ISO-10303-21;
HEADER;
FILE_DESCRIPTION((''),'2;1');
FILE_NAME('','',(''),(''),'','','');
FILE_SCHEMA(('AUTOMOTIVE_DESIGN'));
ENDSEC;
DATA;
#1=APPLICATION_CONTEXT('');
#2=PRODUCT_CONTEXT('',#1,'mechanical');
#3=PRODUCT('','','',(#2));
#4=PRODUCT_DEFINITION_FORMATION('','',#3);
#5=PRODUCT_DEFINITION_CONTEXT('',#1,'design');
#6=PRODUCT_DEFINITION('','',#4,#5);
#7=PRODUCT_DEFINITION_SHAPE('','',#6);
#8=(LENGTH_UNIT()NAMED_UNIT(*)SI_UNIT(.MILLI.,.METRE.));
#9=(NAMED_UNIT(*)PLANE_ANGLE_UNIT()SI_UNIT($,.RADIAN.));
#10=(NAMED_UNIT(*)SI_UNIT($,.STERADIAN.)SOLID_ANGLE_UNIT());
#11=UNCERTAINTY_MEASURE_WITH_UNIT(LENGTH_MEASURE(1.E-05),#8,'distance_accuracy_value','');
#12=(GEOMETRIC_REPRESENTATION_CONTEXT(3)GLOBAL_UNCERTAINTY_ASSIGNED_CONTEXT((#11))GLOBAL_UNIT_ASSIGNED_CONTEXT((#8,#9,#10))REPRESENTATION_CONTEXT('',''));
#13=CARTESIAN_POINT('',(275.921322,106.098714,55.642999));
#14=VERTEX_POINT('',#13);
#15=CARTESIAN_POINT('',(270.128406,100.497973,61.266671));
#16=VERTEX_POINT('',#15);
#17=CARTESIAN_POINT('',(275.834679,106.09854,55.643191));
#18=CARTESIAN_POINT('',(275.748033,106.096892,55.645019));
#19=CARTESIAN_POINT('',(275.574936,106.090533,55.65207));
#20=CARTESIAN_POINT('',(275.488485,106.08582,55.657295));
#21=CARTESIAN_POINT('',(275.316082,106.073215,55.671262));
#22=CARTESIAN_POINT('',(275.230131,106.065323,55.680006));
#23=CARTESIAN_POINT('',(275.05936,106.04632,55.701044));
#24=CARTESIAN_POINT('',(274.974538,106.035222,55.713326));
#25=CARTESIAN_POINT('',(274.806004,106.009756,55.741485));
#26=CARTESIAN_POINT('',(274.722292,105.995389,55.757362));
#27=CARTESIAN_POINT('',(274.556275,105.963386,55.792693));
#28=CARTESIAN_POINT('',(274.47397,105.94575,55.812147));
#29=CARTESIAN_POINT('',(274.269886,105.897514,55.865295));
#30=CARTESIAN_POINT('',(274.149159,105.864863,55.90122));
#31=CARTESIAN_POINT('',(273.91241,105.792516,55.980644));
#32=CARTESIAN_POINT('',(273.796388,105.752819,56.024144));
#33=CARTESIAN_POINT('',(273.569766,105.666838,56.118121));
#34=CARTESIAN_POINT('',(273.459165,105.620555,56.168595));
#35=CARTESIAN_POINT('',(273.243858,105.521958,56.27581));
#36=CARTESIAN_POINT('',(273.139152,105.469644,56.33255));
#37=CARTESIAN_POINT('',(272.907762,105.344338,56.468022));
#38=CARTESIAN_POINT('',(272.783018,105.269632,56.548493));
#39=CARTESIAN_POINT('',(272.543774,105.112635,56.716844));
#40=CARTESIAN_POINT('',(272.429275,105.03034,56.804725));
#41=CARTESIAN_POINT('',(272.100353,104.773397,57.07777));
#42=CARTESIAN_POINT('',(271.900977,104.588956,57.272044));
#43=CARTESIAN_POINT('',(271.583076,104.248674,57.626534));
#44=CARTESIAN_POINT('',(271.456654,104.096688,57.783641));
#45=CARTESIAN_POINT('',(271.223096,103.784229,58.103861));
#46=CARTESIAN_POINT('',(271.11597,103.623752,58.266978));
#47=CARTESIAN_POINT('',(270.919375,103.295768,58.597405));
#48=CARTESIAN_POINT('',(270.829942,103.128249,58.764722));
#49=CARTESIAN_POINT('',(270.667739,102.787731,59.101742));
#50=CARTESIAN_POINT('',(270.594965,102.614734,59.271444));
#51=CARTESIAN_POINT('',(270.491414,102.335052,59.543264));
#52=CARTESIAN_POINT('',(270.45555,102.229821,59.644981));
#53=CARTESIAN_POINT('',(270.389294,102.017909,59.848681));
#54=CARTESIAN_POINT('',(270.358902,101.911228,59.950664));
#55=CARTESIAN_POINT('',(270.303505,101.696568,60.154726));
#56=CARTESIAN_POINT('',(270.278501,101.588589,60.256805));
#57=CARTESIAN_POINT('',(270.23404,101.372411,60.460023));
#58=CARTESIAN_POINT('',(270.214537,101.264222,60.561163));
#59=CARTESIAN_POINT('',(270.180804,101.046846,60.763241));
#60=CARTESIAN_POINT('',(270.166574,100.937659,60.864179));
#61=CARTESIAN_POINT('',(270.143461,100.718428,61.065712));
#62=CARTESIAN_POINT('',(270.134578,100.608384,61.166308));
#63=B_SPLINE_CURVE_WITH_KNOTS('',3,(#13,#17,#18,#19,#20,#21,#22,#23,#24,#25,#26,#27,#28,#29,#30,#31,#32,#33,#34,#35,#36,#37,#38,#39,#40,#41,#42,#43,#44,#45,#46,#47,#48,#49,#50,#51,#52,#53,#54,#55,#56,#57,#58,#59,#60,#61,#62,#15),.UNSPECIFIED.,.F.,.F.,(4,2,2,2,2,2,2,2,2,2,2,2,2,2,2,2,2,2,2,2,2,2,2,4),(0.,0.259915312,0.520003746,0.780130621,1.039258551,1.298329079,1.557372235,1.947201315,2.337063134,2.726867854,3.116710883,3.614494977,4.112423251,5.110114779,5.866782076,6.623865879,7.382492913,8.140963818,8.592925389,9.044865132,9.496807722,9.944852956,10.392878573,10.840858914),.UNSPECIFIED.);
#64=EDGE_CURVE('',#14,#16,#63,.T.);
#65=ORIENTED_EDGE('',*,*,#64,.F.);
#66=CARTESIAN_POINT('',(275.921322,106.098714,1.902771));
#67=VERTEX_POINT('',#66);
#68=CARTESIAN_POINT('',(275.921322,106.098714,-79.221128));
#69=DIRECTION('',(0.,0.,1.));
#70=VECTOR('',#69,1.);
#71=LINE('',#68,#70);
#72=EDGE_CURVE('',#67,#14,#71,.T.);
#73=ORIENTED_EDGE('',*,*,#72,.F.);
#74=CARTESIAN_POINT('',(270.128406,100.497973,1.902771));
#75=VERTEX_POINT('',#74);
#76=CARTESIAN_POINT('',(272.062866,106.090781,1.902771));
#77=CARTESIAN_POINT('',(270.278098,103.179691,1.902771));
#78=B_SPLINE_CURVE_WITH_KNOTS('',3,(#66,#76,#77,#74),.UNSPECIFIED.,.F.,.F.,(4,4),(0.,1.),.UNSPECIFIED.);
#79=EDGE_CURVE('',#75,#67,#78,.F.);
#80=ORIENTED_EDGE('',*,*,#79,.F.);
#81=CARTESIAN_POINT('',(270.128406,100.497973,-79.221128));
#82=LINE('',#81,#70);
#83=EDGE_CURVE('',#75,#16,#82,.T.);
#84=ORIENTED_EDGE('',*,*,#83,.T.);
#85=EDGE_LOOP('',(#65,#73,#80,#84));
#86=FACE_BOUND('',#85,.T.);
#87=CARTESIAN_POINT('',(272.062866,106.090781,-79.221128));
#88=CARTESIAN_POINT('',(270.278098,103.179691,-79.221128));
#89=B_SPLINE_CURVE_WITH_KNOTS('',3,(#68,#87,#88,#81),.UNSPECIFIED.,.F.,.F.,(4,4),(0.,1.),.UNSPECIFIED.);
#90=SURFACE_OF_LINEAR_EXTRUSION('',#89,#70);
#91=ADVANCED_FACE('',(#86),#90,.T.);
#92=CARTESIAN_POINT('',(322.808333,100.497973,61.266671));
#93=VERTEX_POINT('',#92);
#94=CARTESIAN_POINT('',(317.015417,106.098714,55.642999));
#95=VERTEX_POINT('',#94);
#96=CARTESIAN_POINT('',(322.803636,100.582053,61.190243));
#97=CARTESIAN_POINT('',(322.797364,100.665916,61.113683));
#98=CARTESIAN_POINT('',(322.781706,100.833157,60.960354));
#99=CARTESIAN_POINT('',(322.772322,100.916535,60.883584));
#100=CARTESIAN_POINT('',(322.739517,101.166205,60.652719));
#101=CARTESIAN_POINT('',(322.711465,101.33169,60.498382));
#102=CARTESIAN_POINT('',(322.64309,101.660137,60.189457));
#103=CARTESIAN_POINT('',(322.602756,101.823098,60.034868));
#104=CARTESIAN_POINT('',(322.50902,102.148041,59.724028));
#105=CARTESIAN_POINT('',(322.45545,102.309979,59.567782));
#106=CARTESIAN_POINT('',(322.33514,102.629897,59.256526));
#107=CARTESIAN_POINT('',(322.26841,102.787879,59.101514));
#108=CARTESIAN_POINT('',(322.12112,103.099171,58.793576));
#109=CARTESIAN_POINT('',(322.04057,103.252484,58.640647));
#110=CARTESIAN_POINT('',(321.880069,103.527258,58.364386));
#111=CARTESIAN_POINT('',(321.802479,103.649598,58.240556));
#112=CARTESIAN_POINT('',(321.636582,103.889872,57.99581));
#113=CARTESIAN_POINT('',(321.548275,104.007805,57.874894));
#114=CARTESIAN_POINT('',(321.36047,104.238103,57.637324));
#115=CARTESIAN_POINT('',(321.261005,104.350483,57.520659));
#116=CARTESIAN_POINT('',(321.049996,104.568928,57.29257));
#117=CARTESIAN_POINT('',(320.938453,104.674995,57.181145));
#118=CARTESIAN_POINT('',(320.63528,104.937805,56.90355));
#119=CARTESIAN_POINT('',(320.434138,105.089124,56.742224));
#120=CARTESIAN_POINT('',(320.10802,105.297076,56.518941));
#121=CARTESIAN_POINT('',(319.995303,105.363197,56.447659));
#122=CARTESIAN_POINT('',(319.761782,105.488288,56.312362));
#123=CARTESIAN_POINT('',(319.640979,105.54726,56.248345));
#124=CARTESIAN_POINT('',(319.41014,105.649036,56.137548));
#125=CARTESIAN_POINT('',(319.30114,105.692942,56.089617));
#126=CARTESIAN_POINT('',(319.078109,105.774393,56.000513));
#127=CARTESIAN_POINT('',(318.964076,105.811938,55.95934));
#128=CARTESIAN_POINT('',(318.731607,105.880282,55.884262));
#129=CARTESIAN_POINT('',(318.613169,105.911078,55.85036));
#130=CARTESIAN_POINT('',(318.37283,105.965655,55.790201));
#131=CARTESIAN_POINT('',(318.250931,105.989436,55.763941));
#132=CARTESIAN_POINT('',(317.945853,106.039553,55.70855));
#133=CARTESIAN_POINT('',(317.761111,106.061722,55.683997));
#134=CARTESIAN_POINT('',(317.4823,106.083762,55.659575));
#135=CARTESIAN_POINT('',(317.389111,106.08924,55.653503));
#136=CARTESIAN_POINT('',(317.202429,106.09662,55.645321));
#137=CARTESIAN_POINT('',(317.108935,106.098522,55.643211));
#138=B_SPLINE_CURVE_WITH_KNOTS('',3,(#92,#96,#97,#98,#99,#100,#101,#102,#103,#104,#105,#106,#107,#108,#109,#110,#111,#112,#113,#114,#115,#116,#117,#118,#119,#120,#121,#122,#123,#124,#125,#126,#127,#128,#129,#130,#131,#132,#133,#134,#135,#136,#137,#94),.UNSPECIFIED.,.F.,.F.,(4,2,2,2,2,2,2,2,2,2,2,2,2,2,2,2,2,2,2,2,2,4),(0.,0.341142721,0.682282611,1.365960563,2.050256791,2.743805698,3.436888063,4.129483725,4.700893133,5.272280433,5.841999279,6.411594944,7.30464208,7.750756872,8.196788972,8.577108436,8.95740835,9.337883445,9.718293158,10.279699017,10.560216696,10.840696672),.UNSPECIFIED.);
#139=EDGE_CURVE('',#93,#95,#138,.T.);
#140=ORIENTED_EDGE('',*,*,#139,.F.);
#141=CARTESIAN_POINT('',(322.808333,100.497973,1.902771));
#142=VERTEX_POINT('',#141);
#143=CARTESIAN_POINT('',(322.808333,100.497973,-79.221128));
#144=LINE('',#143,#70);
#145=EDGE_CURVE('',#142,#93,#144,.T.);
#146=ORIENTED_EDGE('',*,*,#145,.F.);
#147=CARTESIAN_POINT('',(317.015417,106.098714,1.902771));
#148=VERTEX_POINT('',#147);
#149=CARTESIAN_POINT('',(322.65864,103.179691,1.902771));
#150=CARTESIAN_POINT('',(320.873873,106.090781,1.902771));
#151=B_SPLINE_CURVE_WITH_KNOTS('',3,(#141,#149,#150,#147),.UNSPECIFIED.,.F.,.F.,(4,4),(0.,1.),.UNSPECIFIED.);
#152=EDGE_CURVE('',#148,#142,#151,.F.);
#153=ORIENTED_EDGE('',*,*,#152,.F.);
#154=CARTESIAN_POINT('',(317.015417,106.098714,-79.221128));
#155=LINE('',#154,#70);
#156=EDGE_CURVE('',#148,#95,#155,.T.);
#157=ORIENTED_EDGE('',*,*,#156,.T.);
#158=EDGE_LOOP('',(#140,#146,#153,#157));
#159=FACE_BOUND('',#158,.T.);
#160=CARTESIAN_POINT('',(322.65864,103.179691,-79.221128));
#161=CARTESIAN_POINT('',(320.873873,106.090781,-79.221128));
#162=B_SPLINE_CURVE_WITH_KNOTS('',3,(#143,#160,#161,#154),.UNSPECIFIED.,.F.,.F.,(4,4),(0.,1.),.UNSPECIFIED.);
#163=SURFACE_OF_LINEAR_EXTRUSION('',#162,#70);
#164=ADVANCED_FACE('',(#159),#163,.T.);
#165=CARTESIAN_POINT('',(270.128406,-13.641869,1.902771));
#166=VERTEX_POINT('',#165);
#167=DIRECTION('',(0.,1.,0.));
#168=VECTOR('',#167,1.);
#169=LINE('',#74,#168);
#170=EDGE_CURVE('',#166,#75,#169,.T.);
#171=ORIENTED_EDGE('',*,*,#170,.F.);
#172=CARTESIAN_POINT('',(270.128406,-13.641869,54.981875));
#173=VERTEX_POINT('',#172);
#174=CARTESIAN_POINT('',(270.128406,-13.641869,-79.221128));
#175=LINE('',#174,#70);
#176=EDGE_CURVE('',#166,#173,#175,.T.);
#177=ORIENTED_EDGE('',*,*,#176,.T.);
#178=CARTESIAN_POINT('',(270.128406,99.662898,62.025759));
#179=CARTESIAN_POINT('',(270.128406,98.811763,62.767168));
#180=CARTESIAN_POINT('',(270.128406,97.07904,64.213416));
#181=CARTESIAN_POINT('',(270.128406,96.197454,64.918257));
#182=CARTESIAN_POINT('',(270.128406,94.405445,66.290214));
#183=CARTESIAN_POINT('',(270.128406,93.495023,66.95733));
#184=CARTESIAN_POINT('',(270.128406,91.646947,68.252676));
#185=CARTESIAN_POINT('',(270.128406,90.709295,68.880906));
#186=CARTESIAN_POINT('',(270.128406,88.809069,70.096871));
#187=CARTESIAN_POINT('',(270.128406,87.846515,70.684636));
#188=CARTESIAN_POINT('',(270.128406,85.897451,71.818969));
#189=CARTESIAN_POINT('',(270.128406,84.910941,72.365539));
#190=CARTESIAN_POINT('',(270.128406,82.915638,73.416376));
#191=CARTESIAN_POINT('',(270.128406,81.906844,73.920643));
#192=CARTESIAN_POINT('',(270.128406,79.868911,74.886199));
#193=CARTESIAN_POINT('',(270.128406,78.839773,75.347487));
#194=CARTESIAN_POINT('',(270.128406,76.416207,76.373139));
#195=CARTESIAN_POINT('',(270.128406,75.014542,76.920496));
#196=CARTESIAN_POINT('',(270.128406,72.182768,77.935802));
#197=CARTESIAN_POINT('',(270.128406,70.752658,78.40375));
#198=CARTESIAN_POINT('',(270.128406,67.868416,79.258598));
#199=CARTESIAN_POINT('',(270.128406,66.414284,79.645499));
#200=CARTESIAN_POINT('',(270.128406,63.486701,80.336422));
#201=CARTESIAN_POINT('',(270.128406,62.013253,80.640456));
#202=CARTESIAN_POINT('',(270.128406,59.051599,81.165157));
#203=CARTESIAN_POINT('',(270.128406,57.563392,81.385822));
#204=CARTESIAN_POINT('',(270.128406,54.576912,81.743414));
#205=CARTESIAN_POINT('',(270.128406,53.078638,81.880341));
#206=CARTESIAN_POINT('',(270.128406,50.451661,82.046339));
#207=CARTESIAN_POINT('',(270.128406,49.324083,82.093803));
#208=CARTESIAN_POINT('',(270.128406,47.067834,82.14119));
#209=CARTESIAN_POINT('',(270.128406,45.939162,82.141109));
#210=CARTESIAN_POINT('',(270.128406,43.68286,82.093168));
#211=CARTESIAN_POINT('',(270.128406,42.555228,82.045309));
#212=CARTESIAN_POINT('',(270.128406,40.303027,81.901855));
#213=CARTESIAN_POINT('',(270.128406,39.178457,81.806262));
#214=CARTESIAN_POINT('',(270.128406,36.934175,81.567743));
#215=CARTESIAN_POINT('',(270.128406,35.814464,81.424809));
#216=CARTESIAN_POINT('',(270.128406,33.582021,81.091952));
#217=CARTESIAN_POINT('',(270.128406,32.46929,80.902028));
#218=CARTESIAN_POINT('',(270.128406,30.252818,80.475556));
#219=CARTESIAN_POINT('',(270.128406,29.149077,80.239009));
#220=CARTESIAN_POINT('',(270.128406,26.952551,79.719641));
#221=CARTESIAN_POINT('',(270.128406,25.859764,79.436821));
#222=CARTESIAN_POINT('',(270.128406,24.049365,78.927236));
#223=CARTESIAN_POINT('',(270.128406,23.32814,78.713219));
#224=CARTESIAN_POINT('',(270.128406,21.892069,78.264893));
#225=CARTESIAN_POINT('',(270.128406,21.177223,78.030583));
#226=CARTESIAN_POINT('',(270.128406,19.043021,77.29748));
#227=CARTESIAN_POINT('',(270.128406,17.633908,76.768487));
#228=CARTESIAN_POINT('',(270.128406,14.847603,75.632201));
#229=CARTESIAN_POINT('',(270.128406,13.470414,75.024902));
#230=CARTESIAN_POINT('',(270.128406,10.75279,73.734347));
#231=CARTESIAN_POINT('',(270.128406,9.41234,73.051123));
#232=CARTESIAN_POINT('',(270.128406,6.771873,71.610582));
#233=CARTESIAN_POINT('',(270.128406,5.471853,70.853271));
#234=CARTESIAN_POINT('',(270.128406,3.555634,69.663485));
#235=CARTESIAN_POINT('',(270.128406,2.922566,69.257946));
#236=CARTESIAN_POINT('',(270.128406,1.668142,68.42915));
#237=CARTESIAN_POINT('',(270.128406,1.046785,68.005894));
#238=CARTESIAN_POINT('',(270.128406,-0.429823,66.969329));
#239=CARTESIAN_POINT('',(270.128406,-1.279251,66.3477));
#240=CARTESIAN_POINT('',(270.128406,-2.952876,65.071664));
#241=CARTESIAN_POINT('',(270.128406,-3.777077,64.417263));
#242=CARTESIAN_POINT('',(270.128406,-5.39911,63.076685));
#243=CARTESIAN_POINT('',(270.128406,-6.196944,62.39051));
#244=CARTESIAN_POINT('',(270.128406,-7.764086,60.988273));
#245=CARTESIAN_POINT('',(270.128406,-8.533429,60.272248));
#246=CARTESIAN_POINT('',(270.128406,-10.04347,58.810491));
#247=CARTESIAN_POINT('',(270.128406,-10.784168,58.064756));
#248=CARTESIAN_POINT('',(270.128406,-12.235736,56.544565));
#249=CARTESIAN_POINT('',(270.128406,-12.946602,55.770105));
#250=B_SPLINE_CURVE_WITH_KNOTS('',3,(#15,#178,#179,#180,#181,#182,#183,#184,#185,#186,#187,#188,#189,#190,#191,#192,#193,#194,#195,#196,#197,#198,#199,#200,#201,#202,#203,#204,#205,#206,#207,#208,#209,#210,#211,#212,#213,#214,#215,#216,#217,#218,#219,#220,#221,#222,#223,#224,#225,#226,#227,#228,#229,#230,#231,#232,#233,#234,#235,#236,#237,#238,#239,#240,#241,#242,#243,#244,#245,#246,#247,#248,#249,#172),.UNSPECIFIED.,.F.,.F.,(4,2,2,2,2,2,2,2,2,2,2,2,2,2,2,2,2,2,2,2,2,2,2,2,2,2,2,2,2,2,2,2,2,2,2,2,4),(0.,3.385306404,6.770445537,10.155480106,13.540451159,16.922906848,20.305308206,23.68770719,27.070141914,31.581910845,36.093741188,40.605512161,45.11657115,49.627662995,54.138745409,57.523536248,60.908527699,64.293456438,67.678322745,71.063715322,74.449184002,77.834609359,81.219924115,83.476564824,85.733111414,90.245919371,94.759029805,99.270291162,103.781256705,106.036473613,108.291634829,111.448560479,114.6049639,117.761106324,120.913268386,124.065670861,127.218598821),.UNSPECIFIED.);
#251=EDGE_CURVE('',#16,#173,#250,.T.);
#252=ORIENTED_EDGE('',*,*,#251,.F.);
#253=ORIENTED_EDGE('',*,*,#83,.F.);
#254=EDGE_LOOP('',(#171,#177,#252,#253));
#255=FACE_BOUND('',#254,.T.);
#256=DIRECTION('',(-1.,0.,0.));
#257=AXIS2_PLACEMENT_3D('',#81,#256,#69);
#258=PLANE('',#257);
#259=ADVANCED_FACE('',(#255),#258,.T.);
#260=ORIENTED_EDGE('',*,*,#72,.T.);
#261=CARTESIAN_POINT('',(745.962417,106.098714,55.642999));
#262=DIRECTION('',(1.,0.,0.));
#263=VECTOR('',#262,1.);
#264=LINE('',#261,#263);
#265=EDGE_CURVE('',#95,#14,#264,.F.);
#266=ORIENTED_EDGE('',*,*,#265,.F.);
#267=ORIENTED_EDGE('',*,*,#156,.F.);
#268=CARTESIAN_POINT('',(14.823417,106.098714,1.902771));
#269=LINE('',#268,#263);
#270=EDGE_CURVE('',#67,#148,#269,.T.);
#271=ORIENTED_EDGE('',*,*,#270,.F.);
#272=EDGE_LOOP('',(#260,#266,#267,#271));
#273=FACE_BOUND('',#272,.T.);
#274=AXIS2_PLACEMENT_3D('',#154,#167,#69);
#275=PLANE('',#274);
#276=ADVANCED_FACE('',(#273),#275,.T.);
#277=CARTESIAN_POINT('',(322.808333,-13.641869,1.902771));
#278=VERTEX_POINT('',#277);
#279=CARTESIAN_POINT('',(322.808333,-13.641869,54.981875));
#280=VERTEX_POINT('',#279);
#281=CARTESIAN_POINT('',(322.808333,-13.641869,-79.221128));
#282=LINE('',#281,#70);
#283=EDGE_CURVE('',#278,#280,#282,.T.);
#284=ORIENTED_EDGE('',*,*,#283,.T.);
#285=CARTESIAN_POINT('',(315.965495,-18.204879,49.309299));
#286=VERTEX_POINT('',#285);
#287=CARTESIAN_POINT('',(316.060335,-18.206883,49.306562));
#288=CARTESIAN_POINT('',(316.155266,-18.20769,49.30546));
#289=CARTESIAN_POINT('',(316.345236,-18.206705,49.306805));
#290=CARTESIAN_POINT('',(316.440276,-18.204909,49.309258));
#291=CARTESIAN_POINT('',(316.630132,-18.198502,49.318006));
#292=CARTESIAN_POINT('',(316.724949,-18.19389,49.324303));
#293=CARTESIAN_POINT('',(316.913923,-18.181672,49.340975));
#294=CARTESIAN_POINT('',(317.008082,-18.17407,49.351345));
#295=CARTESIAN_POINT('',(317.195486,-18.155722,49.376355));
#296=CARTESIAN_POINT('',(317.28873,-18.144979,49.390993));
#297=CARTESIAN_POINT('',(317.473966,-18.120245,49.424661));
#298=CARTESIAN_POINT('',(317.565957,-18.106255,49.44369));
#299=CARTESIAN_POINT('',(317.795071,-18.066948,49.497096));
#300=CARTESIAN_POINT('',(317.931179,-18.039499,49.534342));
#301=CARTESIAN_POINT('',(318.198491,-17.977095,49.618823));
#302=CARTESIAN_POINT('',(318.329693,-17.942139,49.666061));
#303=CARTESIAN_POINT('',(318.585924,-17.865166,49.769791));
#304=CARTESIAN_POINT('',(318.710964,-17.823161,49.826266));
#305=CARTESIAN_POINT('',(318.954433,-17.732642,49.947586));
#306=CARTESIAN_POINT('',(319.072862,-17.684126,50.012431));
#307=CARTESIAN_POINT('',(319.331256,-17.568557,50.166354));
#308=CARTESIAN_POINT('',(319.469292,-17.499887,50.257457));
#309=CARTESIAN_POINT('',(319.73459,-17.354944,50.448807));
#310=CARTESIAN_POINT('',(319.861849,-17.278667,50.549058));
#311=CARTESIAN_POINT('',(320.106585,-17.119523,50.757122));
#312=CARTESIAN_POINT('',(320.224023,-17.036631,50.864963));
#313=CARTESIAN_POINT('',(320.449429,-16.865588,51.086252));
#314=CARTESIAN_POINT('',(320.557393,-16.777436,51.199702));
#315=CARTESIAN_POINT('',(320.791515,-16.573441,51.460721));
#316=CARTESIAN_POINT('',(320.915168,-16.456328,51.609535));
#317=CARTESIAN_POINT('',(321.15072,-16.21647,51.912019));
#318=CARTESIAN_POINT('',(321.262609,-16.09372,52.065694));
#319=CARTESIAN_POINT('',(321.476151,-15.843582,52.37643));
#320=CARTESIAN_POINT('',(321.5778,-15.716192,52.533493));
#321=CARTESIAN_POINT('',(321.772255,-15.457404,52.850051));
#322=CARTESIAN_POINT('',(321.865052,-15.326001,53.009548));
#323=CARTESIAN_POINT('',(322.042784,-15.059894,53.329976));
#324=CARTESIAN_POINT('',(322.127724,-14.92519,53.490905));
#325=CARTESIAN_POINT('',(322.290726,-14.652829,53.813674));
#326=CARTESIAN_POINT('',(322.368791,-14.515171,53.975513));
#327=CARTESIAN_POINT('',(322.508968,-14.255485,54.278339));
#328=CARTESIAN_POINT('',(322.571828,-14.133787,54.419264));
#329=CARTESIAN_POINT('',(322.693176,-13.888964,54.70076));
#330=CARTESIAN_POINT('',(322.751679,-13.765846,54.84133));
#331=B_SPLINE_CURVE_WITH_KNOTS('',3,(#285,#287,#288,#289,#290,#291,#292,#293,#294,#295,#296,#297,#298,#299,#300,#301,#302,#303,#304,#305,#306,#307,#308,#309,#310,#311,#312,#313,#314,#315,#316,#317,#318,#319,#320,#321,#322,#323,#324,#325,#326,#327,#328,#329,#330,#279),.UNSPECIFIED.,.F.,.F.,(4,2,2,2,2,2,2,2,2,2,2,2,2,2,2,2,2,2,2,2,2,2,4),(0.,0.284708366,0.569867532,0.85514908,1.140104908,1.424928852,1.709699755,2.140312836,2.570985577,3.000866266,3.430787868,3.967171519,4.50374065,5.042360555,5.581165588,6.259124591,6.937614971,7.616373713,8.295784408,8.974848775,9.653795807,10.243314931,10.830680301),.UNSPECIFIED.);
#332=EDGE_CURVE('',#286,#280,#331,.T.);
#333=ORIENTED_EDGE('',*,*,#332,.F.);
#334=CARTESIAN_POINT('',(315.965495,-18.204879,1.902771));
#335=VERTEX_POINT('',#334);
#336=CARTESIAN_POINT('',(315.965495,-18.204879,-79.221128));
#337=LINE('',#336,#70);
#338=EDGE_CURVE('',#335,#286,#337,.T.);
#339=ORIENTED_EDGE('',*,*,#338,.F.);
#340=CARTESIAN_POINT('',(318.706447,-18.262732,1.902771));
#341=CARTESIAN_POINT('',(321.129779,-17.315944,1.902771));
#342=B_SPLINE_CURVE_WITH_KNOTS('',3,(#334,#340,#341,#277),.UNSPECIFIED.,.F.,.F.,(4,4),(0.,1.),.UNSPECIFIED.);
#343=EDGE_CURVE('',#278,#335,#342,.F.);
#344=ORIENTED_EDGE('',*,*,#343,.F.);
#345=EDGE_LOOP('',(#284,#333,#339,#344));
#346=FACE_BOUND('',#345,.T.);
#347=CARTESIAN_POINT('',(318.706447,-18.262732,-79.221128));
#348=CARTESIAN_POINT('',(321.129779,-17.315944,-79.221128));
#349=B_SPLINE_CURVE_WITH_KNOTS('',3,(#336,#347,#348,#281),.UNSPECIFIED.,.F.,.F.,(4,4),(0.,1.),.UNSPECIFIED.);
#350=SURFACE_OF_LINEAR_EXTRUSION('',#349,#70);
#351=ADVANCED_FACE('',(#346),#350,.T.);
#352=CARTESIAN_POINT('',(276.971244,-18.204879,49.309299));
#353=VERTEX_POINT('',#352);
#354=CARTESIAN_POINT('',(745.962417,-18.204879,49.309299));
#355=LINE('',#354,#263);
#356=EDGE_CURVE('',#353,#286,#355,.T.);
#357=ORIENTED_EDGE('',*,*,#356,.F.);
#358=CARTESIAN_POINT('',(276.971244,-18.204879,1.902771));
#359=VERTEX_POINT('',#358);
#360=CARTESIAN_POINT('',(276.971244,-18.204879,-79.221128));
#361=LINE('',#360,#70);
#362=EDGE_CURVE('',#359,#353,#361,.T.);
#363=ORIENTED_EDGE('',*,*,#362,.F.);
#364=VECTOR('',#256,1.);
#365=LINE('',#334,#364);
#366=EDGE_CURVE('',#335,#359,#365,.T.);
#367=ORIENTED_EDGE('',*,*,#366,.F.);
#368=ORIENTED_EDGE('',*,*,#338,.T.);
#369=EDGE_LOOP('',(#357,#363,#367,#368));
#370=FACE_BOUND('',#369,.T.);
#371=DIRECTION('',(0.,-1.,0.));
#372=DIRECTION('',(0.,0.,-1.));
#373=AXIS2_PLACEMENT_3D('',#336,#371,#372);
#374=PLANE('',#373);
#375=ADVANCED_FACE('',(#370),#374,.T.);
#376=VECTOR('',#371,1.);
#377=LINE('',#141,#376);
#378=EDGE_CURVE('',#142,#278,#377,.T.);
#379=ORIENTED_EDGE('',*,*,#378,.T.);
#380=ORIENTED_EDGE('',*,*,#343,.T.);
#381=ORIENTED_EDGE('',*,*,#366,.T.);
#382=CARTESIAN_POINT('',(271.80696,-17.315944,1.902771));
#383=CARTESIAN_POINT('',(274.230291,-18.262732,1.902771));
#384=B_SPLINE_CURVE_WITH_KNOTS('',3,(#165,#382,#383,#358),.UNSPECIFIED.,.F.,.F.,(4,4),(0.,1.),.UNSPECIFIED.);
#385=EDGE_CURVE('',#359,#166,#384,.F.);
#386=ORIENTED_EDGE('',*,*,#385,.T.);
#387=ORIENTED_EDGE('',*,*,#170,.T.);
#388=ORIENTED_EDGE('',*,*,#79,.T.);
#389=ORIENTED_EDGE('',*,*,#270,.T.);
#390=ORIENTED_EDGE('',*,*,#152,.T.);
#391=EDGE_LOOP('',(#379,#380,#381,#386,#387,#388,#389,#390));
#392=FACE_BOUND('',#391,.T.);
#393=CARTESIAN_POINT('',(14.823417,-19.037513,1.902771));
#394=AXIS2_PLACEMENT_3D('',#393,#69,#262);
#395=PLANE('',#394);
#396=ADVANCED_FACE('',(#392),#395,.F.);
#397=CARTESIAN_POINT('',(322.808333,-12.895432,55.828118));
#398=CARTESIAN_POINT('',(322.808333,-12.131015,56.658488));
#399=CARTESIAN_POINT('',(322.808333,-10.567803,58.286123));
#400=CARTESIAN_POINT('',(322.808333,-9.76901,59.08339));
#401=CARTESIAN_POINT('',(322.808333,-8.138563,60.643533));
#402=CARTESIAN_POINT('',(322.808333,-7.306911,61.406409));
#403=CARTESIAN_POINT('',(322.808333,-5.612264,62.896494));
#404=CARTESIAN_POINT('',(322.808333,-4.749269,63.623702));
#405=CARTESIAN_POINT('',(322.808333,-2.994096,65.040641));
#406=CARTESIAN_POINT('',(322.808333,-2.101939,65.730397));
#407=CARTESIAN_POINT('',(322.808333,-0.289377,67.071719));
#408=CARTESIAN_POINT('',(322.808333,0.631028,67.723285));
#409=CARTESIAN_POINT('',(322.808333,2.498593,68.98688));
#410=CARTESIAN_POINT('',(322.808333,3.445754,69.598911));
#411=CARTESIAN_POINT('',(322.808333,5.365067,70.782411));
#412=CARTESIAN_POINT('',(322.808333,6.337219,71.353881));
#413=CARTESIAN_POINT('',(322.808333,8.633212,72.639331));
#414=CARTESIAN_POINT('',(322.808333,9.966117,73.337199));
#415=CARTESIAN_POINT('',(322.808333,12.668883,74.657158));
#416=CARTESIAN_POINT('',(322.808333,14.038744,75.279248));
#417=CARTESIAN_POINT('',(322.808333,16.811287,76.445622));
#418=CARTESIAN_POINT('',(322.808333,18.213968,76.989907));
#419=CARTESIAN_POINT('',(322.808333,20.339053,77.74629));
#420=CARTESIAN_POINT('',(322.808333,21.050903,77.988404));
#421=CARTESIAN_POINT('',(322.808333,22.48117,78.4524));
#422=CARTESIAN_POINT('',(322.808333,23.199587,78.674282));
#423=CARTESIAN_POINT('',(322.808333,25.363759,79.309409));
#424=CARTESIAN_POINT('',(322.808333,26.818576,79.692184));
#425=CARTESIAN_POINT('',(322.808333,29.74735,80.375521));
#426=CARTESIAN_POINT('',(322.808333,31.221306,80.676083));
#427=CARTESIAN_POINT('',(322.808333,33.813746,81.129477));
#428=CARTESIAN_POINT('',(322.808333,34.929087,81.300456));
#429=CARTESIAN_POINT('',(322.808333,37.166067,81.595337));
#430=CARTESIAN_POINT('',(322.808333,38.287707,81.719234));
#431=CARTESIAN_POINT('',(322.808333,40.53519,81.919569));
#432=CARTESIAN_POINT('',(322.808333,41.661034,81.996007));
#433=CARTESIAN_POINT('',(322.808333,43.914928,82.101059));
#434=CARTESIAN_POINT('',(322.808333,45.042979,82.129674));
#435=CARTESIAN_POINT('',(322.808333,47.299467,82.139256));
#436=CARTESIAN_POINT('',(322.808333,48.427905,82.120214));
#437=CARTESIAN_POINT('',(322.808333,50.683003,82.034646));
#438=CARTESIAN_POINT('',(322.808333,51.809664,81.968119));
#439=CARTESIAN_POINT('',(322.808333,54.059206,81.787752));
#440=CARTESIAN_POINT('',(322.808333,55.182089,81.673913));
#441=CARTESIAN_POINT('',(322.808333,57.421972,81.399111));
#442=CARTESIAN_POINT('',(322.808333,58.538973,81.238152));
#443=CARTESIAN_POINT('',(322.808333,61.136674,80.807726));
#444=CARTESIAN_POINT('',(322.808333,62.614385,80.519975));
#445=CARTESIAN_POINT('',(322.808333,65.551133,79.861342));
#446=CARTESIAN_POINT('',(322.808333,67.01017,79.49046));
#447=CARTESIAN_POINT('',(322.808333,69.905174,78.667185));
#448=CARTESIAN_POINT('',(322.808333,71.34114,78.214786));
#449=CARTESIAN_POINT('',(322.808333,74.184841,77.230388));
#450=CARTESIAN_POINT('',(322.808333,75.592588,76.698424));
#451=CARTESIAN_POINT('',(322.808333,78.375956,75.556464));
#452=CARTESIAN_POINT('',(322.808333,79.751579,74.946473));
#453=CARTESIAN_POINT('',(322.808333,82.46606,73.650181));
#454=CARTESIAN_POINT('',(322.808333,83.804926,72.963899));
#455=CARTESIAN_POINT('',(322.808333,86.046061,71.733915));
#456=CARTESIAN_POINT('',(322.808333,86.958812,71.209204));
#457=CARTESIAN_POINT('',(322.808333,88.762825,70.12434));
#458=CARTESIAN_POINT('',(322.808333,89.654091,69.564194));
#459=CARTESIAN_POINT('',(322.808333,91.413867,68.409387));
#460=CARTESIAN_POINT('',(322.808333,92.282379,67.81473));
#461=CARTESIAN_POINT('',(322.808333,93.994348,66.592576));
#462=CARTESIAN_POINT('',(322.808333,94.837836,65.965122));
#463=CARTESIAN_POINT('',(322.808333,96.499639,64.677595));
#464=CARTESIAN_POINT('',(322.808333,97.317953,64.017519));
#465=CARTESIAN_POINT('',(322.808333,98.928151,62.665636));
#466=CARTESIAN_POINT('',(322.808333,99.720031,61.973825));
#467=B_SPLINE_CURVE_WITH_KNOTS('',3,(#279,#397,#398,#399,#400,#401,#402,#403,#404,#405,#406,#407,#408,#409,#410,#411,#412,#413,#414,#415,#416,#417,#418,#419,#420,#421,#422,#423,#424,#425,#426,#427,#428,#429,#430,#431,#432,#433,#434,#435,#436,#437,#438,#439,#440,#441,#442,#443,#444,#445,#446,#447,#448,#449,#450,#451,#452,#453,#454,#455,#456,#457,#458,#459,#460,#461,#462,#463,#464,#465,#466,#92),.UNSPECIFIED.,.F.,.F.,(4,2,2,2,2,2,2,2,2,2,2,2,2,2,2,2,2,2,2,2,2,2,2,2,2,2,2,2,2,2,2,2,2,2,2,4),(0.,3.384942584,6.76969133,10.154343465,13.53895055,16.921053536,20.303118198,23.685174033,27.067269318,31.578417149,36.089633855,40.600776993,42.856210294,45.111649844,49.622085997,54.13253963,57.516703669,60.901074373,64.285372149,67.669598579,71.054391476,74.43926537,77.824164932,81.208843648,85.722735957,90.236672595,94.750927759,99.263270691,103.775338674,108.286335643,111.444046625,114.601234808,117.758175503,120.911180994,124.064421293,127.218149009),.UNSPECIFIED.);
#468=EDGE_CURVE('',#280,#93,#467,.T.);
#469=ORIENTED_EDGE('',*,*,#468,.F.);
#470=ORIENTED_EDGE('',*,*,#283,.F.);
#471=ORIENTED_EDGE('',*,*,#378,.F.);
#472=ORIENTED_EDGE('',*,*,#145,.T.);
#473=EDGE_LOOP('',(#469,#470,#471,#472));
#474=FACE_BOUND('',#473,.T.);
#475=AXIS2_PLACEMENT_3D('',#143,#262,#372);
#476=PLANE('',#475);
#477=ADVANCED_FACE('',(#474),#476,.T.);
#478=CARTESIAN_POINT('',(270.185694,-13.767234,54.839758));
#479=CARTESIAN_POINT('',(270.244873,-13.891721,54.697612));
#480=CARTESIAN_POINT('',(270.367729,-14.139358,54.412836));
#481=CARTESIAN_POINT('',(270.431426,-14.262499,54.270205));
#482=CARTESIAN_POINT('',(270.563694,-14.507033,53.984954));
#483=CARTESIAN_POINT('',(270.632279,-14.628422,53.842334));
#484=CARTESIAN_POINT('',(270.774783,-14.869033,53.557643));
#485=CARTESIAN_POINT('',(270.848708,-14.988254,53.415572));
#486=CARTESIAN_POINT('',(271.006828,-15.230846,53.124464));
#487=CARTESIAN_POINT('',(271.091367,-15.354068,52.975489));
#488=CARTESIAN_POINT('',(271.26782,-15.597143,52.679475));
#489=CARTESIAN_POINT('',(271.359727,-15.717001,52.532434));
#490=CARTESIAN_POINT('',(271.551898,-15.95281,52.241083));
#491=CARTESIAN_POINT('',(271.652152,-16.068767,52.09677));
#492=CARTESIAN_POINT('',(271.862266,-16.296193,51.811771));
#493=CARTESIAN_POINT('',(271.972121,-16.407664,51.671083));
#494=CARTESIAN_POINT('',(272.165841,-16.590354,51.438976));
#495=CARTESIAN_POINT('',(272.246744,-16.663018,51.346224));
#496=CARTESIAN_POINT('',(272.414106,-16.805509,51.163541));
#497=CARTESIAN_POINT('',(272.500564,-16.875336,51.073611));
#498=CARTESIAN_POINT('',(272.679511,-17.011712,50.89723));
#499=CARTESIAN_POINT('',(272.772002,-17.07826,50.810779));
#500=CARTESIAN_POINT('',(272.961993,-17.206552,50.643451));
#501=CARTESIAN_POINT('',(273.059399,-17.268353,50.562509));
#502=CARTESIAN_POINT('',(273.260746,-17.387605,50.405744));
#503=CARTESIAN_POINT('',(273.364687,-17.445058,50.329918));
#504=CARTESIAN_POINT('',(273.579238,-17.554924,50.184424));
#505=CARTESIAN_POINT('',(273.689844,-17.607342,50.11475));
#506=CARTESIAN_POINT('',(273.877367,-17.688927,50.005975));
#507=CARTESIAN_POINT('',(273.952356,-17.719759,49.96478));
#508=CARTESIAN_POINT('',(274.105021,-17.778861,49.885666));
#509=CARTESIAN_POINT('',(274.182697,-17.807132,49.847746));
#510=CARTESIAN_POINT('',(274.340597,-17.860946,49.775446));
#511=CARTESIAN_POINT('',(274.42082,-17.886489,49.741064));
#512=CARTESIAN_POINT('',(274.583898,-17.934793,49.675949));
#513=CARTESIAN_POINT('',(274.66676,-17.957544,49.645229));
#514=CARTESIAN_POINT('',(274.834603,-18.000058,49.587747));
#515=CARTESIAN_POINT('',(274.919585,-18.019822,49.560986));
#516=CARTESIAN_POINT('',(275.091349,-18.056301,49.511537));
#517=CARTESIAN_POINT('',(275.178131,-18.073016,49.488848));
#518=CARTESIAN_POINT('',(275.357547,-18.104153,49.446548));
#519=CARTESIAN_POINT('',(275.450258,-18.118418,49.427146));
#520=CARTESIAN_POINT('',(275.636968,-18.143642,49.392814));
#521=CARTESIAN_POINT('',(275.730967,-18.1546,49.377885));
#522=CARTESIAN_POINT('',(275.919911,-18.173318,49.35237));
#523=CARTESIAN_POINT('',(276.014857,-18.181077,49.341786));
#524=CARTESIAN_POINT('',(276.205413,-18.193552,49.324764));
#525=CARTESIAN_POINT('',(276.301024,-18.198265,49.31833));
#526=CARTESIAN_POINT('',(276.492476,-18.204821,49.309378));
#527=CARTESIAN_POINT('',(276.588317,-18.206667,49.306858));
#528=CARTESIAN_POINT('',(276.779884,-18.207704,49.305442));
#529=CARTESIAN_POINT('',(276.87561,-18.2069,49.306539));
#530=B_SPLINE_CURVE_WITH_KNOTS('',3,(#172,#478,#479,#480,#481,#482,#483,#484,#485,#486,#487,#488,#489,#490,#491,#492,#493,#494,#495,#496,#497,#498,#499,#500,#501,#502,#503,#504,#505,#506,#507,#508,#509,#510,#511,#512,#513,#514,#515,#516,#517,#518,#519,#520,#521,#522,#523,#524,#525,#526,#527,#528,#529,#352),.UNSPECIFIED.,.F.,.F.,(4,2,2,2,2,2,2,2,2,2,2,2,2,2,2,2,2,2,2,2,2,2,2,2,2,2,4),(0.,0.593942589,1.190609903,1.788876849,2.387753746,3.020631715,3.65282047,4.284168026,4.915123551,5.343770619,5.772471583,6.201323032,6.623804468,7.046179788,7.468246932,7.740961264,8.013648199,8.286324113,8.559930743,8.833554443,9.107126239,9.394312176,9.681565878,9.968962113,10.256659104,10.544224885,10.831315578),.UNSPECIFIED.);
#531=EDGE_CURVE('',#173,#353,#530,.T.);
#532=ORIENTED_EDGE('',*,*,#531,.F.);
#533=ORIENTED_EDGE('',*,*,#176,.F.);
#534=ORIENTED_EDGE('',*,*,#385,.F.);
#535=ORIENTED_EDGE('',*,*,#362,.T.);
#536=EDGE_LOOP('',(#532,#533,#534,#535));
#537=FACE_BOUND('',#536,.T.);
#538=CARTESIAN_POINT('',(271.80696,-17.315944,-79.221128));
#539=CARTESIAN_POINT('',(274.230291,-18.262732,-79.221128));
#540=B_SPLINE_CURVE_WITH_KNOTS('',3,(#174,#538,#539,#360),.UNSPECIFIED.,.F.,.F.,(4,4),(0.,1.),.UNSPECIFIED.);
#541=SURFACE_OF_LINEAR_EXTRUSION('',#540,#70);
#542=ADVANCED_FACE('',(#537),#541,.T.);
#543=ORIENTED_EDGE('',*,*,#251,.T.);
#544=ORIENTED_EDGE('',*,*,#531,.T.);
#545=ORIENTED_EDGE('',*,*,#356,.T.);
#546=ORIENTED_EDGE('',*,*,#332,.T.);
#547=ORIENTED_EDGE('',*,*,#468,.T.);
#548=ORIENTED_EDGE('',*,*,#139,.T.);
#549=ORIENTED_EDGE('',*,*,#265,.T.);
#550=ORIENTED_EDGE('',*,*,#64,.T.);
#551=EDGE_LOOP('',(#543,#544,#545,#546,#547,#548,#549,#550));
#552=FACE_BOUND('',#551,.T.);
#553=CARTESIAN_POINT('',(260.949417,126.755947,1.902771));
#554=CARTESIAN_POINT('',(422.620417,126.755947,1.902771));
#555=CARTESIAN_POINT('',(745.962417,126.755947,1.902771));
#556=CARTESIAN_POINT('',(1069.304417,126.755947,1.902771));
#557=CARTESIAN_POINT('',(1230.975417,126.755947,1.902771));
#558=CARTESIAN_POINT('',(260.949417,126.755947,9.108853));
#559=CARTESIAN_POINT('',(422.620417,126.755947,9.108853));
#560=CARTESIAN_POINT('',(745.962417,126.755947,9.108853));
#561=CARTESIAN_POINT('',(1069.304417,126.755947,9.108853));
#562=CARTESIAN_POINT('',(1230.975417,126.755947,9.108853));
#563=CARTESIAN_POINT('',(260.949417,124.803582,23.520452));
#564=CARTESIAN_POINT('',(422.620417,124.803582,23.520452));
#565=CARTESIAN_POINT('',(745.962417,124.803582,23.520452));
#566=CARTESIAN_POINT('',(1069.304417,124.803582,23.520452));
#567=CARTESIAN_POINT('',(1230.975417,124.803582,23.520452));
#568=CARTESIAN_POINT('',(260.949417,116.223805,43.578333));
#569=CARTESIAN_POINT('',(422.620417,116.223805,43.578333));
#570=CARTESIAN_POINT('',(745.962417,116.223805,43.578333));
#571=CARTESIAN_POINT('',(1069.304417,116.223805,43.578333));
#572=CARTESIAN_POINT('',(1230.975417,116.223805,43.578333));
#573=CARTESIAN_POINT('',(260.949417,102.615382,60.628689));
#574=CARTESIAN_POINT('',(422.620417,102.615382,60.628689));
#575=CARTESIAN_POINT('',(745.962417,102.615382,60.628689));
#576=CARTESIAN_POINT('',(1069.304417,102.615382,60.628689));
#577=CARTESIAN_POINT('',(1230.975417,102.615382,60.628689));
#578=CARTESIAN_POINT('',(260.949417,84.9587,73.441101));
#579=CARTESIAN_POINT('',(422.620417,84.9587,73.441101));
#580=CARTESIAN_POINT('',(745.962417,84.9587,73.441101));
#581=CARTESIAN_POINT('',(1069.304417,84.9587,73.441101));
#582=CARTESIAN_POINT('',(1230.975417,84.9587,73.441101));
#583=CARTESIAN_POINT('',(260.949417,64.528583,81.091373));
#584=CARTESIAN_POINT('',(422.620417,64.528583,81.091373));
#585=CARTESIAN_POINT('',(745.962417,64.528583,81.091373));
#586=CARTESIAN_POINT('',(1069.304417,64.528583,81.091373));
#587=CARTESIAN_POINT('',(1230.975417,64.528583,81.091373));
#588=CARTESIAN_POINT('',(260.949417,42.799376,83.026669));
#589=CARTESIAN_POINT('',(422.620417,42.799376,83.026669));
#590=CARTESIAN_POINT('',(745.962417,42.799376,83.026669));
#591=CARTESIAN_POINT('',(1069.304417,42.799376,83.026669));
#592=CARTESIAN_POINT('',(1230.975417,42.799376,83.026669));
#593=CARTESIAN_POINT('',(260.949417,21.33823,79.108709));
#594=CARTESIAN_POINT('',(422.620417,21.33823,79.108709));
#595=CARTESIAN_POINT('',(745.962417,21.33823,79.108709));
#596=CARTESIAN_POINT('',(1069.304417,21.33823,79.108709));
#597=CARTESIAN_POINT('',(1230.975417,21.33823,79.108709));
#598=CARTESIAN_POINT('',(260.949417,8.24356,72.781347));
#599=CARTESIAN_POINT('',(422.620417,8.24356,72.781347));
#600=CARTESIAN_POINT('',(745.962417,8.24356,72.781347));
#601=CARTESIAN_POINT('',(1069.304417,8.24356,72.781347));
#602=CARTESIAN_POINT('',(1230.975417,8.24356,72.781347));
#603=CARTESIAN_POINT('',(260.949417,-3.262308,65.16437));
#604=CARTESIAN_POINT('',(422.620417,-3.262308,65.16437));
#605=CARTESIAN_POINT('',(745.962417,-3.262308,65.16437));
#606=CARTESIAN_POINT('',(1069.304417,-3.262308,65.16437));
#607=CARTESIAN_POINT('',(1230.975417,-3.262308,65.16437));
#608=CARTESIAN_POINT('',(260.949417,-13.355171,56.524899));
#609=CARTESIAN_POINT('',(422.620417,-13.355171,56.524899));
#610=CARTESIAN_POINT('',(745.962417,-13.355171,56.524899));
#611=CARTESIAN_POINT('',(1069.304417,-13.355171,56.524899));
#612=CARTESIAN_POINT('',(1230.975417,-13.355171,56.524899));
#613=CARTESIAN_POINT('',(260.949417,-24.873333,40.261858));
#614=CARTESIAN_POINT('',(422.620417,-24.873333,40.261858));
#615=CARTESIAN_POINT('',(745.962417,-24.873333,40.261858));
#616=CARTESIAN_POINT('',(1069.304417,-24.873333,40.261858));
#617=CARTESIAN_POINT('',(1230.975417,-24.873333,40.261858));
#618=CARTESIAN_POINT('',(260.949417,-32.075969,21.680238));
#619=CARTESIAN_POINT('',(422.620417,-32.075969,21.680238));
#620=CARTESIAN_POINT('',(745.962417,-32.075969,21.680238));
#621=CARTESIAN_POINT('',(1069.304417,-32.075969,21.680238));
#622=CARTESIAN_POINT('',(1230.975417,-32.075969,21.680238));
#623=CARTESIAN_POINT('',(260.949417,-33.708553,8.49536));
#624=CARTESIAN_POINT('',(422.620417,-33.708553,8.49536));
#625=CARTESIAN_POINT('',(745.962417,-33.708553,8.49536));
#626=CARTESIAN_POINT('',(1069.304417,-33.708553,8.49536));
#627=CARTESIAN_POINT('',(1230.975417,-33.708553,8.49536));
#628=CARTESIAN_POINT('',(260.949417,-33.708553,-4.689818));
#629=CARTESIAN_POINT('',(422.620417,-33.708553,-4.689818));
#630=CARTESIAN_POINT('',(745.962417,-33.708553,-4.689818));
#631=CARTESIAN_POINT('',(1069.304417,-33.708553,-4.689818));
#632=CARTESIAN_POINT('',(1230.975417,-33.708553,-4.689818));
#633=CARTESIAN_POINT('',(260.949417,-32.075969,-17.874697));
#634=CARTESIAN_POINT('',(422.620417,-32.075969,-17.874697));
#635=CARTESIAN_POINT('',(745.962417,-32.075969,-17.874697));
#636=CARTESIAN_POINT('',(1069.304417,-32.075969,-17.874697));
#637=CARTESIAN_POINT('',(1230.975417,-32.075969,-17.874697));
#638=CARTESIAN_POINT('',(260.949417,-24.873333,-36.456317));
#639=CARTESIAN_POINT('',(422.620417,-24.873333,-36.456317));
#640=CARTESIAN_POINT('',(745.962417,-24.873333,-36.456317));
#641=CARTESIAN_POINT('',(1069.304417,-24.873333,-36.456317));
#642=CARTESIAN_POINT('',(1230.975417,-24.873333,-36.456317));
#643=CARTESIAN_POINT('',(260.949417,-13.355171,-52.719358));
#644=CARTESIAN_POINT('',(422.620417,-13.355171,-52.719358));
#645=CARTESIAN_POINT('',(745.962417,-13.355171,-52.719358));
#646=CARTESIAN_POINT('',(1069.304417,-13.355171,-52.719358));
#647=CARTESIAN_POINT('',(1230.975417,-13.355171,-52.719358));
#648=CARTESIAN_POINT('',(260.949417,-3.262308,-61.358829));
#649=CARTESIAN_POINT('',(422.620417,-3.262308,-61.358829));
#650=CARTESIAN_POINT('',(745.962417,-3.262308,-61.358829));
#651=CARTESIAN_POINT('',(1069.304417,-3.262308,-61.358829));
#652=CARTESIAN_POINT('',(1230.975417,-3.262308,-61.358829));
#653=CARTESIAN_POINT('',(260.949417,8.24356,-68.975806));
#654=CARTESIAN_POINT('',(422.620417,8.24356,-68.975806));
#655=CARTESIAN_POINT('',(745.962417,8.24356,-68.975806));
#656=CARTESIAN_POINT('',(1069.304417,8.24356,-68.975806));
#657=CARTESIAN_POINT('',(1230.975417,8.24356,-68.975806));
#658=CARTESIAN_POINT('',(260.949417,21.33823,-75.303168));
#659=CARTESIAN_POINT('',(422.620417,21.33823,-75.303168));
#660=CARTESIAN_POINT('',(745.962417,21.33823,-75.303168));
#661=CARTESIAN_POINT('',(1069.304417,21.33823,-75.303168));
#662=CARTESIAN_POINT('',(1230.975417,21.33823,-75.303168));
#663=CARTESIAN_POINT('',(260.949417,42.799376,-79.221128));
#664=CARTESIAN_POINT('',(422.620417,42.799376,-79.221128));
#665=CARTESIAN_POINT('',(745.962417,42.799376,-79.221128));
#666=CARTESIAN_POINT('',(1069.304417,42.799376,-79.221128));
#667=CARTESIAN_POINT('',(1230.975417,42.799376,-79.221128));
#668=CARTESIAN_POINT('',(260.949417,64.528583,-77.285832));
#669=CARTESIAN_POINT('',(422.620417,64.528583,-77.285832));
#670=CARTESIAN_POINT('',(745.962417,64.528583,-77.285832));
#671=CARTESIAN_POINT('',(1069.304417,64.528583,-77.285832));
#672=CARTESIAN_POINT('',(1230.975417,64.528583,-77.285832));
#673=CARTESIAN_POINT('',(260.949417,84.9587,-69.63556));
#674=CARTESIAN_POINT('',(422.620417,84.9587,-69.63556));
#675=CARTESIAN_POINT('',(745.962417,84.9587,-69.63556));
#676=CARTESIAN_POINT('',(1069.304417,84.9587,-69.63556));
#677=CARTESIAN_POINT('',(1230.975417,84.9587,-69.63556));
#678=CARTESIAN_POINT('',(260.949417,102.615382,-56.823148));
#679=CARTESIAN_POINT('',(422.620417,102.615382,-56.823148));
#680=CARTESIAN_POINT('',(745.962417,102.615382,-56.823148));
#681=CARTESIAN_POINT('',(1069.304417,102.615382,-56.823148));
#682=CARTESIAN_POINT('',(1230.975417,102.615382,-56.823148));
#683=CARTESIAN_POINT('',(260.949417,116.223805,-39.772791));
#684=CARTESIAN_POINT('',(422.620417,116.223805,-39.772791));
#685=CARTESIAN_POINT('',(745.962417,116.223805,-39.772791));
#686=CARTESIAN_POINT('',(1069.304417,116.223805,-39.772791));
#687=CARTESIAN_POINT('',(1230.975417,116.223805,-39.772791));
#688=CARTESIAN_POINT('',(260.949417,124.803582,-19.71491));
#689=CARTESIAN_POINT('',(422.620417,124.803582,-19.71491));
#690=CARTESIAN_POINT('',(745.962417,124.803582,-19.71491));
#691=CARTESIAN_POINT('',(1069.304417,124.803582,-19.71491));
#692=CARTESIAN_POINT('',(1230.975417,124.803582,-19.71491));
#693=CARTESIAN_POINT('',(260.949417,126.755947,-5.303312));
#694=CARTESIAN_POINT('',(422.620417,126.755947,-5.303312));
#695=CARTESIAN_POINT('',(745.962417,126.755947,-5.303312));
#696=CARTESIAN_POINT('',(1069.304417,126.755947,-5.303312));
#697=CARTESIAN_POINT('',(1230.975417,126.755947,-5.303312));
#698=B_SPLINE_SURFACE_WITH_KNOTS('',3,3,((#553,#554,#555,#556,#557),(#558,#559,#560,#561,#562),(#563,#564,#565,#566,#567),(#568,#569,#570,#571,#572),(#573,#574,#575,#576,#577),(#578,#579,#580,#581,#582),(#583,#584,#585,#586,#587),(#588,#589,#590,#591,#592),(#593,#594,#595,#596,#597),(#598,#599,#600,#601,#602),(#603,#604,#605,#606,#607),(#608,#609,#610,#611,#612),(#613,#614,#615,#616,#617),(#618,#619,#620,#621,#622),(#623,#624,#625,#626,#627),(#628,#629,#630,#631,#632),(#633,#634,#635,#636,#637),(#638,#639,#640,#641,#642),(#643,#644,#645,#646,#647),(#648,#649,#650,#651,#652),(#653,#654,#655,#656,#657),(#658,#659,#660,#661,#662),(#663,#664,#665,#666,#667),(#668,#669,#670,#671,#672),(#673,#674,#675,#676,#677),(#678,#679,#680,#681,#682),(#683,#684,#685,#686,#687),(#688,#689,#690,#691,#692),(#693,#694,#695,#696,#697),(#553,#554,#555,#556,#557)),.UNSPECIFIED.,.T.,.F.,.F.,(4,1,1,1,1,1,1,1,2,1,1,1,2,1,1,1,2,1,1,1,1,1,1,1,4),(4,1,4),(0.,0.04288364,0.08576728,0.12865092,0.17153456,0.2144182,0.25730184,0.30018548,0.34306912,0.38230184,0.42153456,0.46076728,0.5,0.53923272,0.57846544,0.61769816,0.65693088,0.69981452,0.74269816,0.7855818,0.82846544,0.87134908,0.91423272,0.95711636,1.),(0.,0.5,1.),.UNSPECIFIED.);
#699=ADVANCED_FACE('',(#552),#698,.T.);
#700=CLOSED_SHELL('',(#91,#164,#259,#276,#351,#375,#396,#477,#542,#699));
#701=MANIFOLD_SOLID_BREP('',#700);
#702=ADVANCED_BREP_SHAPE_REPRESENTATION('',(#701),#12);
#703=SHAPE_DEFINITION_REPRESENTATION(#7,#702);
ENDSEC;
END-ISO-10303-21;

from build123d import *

# Parameters (mm, degrees)
LOFT1_START             = 259.08
LOFT1_DEPTH             = 1021.08
CUT_EXTRUDE1_DEPTH      = 1290.62122974
LPATTERN1_COUNT         = 15
LPATTERN1_PITCH         = 53.34
CUT_EXTRUDE4_DEPTH      = 1290.62122974
CUT_EXTRUDE4_DEPTH_BACK = 1290.62122974
SKETCH12_OUTSIDE_W      = 1232.81
SKETCH12_OUTSIDE_H      = 380.64
SKETCH13_W              = 691.165372795
SKETCH13_H              = 233.895042588
CUT_EXTRUDE5_DEPTH      = 360.661187802
SCALE1_SCALE            = 0.95


# Read off the part's stored shape, not the designer's step: Loft1
with BuildPart() as part:
    # Loft1 outline → Loft1 (new body)
    with BuildSketch(Plane.YZ.offset(LOFT1_START)):
        with BuildLine():
            add(Edge.make_bspline(
                [(131.074840176, 0), (131.074840176, 7.585349878), (129.019719734, 22.755453715), (119.988374686, 43.869012627), (105.663719284, 61.816756347), (87.077737999, 75.303505752), (65.572351994, 83.356423395), (42.699502143, 85.39357748), (20.108822767, 81.269408641), (6.324958878, 74.609028267), (-5.786480365, 66.591156976), (-16.410547257, 57.496977056), (-28.534928085, 40.377986455), (-36.116650435, 20.818386871), (-37.835159824, 6.939567352), (-37.835159824, -6.939567352), (-36.116650435, -20.818386871), (-28.534928085, -40.377986455), (-16.410547257, -57.496977056), (-5.786480365, -66.591156976), (6.324958878, -74.609028267), (20.108822767, -81.269408641), (42.699502143, -85.39357748), (65.572351994, -83.356423395), (87.077737999, -75.303505752), (105.663719284, -61.816756347), (119.988374686, -43.869012627), (129.019719734, -22.755453715), (131.074840176, -7.585349878), (131.074840176, 0)],
                knots=[0, 0, 0, 0, 0.04288364, 0.08576728, 0.12865092, 0.17153456, 0.2144182, 0.25730184, 0.30018548, 0.34306912, 0.34306912, 0.38230184, 0.42153456, 0.46076728, 0.5, 0.5, 0.53923272, 0.57846544, 0.61769816, 0.65693088, 0.65693088, 0.69981452, 0.74269816, 0.7855818, 0.82846544, 0.87134908, 0.91423272, 0.95711636, 1, 1, 1, 1], degree=3))
        make_face()
    extrude(amount=LOFT1_DEPTH)

    # Sketch10 (on Front Plane) → Cut-Extrude1 (cut, symmetric)
    with BuildSketch(Plane.XY):
        with BuildLine():
            Line((370.088452905, 78.026436792), (370.088452905, 52.620114122))
            add(Edge.make_bspline(
                [(370.088452905, 52.620114122), (370.995867627, 49.272576747), (375.115065094, 47.839862903)],
                knots=[0, 0, 0, 1, 1, 1], degree=2))
            Line((375.115065094, 47.839862903), (390.064888423, 47.839862903))
            add(Edge.make_bspline(
                [(395.091500612, 52.620114122), (394.184085889, 49.272576747), (390.064888423, 47.839862903)],
                knots=[0, 0, 0, 1, 1, 1], degree=2))
            Line((395.091500612, 52.620114122), (395.091500612, 78.026436792))
            add(Edge.make_bspline(
                [(390.064888423, 82.082511515), (392.217535458, 82.043682887), (394.561076709, 80.900159735), (395.091500612, 78.026436792)],
                knots=[0, 0, 0, 0, 1, 1, 1, 1], degree=3))
            Line((390.064888423, 82.082511515), (375.115065094, 82.082511515))
            add(Edge.make_bspline(
                [(375.115065094, 82.082511515), (372.962418059, 82.043682887), (370.618876808, 80.900159735), (370.088452905, 78.026436792)],
                knots=[0, 0, 0, 0, 1, 1, 1, 1], degree=3))
        make_face()
    cut_extrude1 = extrude(amount=CUT_EXTRUDE1_DEPTH, both=True, mode=Mode.SUBTRACT)

    # LPattern1: Cut-Extrude1 ×15
    with Locations(*[(i * LPATTERN1_PITCH, 0, 0) for i in range(1, LPATTERN1_COUNT)]):
        add(cut_extrude1, mode=Mode.SUBTRACT)

    # Sketch12 outside (on Front Plane) → Cut-Extrude4 (cut, two sides: drawn at the far end of the back side and taken through both)
    with BuildSketch(Plane.XY.offset(-CUT_EXTRUDE4_DEPTH_BACK)):
        with Locations((769.62, 46.62)):
            Rectangle(SKETCH12_OUTSIDE_W, SKETCH12_OUTSIDE_H)
        with BuildLine():
            Line((268.742092957, 103.434867576), (268.742092957, -16.712334523))
            add(Edge.make_bspline(
                [(268.742092957, -16.712334523), (270.508991838, -20.579782205), (273.059867475, -21.576401142), (275.945080305, -21.515503071)],
                knots=[0, 0, 0, 0, 1, 1, 1, 1], degree=3))
            Line((275.945080305, -21.515503071), (316.991660423, -21.515503071))
            add(Edge.make_bspline(
                [(324.194647772, -16.712334523), (322.42774889, -20.579782205), (319.876873253, -21.576401142), (316.991660423, -21.515503071)],
                knots=[0, 0, 0, 0, 1, 1, 1, 1], degree=3))
            Line((324.194647772, -16.712334523), (324.194647772, 103.434867576))
            add(Edge.make_bspline(
                [(324.194647772, 103.434867576), (324.037076707, 106.257728711), (322.158374039, 109.32203364), (318.096841472, 109.330384599)],
                knots=[0, 0, 0, 0, 1, 1, 1, 1], degree=3))
            Line((318.096841472, 109.330384599), (274.839899257, 109.330384599))
            add(Edge.make_bspline(
                [(268.742092957, 103.434867576), (268.899664021, 106.257728711), (270.77836669, 109.32203364), (274.839899257, 109.330384599)],
                knots=[0, 0, 0, 0, 1, 1, 1, 1], degree=3))
        make_face(mode=Mode.SUBTRACT)
    extrude(amount=CUT_EXTRUDE4_DEPTH + CUT_EXTRUDE4_DEPTH_BACK, mode=Mode.SUBTRACT)

    # Sketch13 → Cut-Extrude5 (cut, through all)
    with BuildSketch(Plane(origin=(0, 109.330384599, 0), x_dir=(1, 0, 0), z_dir=(0, 1, 0))):
        with Locations((345.582686398, 116.947521294)):
            Rectangle(SKETCH13_W, SKETCH13_H)
    extrude(amount=-CUT_EXTRUDE5_DEPTH, mode=Mode.SUBTRACT)


with BuildPart() as part_1:
    # Scale1: scaled about (296.468369915, 44.696953726, 38.055435363)
    add(part.part.scale(SCALE1_SCALE).moved(Location((14.823418496, 2.234847686, 1.902771768))))


solid = part_1.part
